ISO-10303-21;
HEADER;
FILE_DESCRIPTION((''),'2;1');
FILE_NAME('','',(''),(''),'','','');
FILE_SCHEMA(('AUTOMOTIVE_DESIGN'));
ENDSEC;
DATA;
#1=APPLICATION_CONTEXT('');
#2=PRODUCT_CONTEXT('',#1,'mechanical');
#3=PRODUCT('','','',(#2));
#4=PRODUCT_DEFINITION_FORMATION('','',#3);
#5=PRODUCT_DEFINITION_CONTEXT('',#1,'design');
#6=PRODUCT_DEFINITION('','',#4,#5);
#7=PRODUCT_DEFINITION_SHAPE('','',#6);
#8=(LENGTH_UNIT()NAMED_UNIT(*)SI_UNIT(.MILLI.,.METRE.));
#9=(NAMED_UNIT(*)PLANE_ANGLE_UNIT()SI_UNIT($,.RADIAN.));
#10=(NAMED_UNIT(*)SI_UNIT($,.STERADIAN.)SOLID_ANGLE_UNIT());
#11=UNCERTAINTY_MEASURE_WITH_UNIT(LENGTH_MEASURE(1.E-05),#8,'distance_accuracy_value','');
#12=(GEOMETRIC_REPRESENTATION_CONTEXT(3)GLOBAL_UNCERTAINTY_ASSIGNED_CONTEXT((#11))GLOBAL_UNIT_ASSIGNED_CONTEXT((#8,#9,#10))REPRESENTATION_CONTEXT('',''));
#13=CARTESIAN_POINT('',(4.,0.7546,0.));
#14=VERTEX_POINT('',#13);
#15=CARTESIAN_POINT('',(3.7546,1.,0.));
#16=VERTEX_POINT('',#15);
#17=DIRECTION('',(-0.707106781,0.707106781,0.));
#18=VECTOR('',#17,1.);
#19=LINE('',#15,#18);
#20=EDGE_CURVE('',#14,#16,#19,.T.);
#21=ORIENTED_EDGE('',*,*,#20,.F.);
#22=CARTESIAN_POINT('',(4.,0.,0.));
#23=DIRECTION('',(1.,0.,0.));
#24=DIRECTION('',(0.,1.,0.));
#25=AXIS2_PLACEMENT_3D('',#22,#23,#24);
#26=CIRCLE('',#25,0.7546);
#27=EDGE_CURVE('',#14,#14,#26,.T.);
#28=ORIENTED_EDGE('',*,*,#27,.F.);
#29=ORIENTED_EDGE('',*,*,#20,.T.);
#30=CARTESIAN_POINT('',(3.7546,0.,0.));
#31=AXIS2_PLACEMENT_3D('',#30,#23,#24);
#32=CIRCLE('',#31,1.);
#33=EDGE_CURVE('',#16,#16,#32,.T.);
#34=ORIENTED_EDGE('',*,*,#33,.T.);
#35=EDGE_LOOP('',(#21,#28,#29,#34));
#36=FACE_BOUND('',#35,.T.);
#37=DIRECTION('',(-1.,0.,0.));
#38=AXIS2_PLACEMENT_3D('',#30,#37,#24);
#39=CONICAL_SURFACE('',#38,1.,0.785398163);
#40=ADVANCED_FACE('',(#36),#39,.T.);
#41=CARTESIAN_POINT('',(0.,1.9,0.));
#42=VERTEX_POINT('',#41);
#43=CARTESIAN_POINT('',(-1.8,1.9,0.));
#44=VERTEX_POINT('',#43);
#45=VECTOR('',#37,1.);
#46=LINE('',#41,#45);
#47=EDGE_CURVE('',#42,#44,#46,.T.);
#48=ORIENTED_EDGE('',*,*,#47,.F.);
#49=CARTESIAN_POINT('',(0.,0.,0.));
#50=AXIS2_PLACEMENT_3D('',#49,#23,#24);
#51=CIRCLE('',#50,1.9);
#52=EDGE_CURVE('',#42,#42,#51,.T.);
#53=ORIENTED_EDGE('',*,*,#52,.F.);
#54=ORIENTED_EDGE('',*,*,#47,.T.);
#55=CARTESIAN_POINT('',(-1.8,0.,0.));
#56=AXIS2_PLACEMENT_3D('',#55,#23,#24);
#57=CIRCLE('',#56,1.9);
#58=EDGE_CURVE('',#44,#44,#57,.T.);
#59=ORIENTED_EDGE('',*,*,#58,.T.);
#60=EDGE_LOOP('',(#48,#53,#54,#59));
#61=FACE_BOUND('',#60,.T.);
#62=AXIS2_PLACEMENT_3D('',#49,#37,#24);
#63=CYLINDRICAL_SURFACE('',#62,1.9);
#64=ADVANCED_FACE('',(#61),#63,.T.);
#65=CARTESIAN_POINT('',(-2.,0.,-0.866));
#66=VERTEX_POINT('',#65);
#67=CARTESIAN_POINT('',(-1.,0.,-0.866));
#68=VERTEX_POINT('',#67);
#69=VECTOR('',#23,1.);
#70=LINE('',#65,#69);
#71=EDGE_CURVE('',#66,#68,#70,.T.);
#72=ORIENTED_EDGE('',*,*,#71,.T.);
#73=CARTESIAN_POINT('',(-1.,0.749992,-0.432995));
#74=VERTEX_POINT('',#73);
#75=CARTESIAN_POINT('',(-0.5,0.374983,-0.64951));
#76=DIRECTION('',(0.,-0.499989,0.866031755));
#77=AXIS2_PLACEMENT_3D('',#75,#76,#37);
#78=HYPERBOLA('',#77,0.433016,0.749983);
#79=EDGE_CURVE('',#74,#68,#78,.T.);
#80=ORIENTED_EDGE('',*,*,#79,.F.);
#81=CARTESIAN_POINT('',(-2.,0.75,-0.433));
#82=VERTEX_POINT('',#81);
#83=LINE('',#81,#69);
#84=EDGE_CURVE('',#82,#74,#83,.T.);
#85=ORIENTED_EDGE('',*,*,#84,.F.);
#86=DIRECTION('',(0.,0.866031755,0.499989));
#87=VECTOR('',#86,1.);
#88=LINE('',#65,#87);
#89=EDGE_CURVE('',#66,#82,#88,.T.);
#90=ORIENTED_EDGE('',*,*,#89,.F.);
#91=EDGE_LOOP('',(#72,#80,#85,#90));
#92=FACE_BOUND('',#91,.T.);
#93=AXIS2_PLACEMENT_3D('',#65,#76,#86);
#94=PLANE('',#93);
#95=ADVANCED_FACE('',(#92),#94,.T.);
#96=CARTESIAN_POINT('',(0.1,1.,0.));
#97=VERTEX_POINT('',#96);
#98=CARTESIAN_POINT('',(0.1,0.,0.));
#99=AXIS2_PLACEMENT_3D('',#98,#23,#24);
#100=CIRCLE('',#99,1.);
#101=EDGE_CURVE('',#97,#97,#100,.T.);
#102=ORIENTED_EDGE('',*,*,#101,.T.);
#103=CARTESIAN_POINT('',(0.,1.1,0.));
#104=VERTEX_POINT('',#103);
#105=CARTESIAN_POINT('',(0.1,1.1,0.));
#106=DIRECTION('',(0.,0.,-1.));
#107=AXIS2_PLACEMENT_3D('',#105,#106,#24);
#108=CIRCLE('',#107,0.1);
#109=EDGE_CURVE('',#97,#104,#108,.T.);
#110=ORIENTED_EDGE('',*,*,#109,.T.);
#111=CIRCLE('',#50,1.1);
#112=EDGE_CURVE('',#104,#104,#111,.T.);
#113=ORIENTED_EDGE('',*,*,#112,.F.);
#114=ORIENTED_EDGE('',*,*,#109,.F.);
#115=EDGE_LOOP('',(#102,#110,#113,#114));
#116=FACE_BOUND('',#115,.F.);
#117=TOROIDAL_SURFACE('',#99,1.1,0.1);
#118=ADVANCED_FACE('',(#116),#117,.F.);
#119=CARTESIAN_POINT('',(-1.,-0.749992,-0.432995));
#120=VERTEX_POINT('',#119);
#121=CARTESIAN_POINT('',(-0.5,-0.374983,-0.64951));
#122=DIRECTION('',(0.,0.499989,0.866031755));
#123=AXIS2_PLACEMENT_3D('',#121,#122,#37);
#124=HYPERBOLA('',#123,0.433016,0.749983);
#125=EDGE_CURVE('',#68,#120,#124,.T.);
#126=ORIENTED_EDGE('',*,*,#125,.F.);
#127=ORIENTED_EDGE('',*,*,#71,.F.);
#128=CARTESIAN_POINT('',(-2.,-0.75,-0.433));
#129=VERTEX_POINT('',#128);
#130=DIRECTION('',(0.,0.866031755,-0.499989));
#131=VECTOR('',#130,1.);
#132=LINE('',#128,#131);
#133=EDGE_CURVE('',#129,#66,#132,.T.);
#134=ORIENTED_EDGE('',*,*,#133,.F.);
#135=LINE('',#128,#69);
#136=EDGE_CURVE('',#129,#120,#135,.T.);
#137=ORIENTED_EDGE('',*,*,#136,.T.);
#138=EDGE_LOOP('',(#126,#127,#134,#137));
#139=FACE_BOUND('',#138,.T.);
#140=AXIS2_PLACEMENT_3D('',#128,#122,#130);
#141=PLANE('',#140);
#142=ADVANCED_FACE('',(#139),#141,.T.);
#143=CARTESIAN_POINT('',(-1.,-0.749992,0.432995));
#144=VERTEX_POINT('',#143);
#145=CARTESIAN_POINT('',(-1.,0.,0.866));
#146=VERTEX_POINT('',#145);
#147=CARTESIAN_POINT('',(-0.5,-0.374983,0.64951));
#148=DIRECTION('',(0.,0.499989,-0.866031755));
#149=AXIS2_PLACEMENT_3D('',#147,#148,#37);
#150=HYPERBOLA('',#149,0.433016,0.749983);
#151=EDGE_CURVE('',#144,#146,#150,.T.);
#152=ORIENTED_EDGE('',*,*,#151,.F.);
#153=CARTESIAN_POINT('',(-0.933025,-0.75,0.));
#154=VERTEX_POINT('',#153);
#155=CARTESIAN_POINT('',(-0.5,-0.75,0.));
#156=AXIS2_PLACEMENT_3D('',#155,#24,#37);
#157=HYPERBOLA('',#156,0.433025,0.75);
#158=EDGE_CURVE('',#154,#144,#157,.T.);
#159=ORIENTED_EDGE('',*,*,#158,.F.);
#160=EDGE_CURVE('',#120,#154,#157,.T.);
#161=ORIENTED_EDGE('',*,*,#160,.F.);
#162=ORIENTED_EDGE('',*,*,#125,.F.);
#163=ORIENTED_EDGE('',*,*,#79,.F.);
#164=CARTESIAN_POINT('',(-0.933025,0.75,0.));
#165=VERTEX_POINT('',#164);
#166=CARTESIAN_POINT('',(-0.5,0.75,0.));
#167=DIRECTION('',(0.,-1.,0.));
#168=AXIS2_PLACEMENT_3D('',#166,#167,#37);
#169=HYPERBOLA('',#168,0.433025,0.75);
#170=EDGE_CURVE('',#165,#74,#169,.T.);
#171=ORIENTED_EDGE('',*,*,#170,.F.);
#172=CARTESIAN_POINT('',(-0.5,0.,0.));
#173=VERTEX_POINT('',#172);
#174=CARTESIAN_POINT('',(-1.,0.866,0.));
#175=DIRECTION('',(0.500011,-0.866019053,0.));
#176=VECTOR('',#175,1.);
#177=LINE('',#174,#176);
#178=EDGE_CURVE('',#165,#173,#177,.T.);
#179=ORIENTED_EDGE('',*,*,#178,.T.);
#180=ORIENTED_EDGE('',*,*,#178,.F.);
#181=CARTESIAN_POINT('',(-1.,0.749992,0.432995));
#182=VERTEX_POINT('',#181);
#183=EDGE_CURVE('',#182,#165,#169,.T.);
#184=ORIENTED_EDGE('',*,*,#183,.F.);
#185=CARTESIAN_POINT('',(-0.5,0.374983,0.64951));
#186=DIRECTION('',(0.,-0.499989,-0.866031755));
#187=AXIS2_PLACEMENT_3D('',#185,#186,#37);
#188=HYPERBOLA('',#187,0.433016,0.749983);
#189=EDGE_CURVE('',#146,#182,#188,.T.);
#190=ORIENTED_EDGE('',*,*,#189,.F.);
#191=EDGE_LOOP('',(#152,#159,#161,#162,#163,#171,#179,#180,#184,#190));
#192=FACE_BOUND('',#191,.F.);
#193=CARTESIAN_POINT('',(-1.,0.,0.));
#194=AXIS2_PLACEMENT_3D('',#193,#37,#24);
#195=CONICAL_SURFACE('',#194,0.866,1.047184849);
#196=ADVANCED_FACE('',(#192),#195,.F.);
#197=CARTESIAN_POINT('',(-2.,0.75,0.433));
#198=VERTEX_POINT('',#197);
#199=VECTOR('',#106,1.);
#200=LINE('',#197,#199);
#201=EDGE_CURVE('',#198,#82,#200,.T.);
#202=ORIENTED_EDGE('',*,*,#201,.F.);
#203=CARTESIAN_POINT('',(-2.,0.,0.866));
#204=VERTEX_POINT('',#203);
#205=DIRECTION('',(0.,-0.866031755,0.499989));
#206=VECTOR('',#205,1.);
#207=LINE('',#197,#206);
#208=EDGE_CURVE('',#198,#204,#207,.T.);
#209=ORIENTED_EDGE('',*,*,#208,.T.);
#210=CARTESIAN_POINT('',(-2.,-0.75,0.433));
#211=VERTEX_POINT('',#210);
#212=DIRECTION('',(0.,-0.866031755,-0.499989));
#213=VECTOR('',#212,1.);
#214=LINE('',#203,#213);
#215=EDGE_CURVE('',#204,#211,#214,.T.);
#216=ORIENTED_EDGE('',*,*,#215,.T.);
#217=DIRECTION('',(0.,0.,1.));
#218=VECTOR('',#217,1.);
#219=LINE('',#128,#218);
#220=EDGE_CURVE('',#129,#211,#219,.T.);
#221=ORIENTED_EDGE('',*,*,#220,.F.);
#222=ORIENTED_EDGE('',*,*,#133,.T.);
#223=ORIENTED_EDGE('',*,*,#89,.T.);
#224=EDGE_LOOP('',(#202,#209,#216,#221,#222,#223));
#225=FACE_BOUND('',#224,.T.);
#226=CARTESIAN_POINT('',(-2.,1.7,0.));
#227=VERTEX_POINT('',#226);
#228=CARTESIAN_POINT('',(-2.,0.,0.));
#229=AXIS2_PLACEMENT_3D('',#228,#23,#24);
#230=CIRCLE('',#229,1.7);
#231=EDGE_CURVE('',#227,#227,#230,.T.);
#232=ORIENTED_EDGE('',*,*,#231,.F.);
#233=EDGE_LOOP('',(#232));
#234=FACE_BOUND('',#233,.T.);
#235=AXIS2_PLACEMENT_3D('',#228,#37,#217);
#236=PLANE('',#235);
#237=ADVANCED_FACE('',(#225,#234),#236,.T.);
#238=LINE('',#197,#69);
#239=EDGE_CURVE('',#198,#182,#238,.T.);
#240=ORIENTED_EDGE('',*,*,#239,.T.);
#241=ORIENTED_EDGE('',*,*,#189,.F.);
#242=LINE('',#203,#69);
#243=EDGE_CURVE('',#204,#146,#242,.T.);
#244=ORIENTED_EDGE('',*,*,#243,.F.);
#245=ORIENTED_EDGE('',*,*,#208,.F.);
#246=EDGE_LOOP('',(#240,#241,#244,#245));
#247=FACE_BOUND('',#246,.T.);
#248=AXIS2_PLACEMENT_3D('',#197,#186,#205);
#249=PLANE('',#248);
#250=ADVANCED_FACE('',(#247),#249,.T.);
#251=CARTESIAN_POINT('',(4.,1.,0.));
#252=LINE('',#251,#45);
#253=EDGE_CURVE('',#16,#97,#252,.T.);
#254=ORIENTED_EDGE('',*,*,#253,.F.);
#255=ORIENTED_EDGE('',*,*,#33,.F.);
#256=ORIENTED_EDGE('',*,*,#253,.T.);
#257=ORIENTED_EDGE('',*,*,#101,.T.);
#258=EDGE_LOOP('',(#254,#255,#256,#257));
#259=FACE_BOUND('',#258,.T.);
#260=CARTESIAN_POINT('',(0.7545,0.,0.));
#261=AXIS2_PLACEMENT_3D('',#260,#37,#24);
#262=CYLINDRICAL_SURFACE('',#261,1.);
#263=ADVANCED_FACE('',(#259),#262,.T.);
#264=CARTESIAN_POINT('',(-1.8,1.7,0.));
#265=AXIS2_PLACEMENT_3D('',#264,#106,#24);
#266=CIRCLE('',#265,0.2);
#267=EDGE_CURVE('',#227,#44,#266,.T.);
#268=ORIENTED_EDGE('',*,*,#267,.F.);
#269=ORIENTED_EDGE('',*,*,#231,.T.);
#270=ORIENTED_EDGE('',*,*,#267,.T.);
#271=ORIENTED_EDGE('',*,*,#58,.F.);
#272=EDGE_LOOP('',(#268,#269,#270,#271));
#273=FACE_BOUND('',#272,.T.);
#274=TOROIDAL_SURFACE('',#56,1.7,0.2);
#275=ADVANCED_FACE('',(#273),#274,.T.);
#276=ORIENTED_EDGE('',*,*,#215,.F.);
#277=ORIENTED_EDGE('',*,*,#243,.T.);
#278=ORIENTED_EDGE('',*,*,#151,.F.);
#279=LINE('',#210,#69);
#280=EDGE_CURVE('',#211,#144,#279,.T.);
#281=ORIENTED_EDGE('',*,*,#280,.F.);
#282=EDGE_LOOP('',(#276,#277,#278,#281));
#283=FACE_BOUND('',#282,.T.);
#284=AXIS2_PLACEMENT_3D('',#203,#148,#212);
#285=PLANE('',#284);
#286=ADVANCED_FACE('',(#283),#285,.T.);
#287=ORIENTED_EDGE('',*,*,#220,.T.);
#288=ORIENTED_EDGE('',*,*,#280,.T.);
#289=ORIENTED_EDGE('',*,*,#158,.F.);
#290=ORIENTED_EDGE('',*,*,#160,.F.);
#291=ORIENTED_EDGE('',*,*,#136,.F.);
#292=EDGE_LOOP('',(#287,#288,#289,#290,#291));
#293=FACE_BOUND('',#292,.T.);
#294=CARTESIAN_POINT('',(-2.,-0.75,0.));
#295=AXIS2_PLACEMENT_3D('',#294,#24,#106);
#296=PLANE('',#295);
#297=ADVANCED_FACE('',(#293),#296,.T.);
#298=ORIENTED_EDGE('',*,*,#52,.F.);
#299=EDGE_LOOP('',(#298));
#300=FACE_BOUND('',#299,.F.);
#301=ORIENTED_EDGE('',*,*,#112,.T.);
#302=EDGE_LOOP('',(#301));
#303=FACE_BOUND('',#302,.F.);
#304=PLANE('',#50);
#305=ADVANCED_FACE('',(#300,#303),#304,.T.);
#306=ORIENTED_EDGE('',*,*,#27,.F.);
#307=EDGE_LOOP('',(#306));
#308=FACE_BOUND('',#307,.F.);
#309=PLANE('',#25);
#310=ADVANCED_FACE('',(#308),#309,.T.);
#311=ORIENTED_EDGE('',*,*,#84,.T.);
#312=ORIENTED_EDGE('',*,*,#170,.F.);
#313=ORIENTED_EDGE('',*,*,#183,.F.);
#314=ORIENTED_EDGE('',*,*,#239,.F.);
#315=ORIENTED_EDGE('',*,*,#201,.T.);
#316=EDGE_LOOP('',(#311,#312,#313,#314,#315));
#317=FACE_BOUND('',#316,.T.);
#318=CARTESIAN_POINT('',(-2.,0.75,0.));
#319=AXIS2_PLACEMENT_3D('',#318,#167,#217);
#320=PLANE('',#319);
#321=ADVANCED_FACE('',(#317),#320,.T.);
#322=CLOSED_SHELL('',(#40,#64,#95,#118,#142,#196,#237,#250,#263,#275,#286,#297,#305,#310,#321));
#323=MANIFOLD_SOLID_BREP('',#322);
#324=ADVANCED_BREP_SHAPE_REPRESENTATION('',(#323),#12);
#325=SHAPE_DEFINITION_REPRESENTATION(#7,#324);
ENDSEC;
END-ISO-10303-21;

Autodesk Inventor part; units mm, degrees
ref_plane "YZ Plane" through (0, 0, 0) normal (1, 0, 0) x (0, 1, 0)
ref_plane "XZ Plane" through (0, 0, 0) normal (0, 1, 0) x (-1, 0, 0)
sketch "Sketch1" plane through (0, 0, 0) normal (0, 0, 1) x (1, 0, 0)
  line L0 (-0.5, 0) -> (4, 0)
  line L1 (4, 0) -> (4, 1)
  line L2 (4, 1) -> (1, 1)
  line L3 (1, 1) -> (0.7545, 1)
  line L4 (0.7545, 1) -> (0, 1)
  line L5 (0, 1) -> (0, 1.9)
  line L6 (0, 1.9) -> (-2, 1.9)
  line L7 (-2, 1.9) -> (-2, 0.866)
  line L8 (-2, 0.866) -> (-1, 0.866)
  line L9 (-1, 0.866) -> (-0.5, 0)
  line L10 (-3.2, 0) -> (5.2, 0) projected
  line L11 (0, -0.38) -> (0, 2.28) projected
  line L12 (1, 1) -> (0, 1) construction
  dimension "d1" = 3
  dimension "d2" = 0.2455
  dimension "d3" = 2
  dimension "d4" = 1
  dimension "d5" = 60
  dimension "d6" = 2
  dimension "d7" = 2
  dimension "d8" = 1.7321
  dimension "d9" = 3.8
  dimension "d26" = 4
revolve "Body" add sketch "Sketch1" angle 360 about axis through (-0.5, 0, 0) along (1, 0, 0)
sketch "Sketch2" plane through (-2, 0, 0) normal (-1, 0, 0) x (0, 0, 1)
  circle A0 centre (0, 0) radius 0.866 projected
  line L0 (0, -2.66) -> (0, 2.66) projected
  line L1 (-2.66, 0) -> (2.66, 0) projected
  line L2 (0.866, 0) -> (0.433, -0.75)
  line L3 (0.433, -0.75) -> (-0.433, -0.75)
  line L4 (-0.433, -0.75) -> (-0.866, 0)
  line L5 (-0.866, 0) -> (-0.433, 0.75)
  line L6 (-0.433, 0.75) -> (0.433, 0.75)
  line L7 (0.433, 0.75) -> (0.866, 0)
extrude "Slot" add sketch "Sketch2" against normal up to next contours L7 A0 | A0 L2 | L6 L0 A0 | A0 L0 L3 | L0 L6 A0 | A0 L3 L0 | L4 A0 | A0 L5
fillet "Fillet1" radius 0.2 1 edges at (-2, -1.9, 0)
thread "Thread" size "M2x0.4" class "6g" standard "ISO Metric profile" length 3
chamfer "Chamfer1" distance 0.2454 distance2 0.2454 1 edges at (4, -1, 0) measured on face at (4, -0.4588, -0.3309)
ref_plane "Work Plane1" through (29, 0, 0) normal (0, -1, 0) x (1, 0, 0)
fillet "Fillet2" radius 0.1 1 edges at (0, -1, 0)
equation "\"d1\" = GEL"
equation "\"d3\" = KOH"
equation "\"d4\" = INTI"
equation "\"d6\" = GD"
equation "\"d7\" = BDM"
equation "\"d8\" = 1.1547 * SW"
equation "\"d9\" = KOD"
equation "\"d26\" = NLG"
equation "\"d30\" = R"
equation "\"d17\" = RR"
equation "\"d13\" = GEL"
equation "\"d15\" = -0.5 * SPD + 0.5 * GD"
equation "\"d16\" = GUL"
equation "\"GD\" = 2"
equation "\"NLG\" = 4"
equation "\"GEL\" = 3"
equation "\"KOD\" = 3.8"
equation "\"KOH\" = 2"
equation "\"INTI\" = 1"
equation "\"GAL\" = 0.61345 * PTC"
equation "\"GUL\" = 0.61345 * PTC"
equation "\"BDM\" = NND"
equation "\"SW\" = 1.5"
equation "\"RR\" = 0.2"
equation "\"SPD\" = NND - 1.2269 * PTC"
equation "\"R\" = 0.1"
equation "\"TOA\" = 30deg"
equation "\"GD1\" = THREADDIA - 1.2269 * PTC"
equation "\"THREADDIA\" = 2"
equation "\"FAWI\" = 45deg"
equation "\"PTC\" = 0.4"
equation "\"NND\" = 2"
equation "\"E0\" = 1.155 * SW"
properties part number "M2 x 4 (Default)" material "Stainless Steel, 440C"
